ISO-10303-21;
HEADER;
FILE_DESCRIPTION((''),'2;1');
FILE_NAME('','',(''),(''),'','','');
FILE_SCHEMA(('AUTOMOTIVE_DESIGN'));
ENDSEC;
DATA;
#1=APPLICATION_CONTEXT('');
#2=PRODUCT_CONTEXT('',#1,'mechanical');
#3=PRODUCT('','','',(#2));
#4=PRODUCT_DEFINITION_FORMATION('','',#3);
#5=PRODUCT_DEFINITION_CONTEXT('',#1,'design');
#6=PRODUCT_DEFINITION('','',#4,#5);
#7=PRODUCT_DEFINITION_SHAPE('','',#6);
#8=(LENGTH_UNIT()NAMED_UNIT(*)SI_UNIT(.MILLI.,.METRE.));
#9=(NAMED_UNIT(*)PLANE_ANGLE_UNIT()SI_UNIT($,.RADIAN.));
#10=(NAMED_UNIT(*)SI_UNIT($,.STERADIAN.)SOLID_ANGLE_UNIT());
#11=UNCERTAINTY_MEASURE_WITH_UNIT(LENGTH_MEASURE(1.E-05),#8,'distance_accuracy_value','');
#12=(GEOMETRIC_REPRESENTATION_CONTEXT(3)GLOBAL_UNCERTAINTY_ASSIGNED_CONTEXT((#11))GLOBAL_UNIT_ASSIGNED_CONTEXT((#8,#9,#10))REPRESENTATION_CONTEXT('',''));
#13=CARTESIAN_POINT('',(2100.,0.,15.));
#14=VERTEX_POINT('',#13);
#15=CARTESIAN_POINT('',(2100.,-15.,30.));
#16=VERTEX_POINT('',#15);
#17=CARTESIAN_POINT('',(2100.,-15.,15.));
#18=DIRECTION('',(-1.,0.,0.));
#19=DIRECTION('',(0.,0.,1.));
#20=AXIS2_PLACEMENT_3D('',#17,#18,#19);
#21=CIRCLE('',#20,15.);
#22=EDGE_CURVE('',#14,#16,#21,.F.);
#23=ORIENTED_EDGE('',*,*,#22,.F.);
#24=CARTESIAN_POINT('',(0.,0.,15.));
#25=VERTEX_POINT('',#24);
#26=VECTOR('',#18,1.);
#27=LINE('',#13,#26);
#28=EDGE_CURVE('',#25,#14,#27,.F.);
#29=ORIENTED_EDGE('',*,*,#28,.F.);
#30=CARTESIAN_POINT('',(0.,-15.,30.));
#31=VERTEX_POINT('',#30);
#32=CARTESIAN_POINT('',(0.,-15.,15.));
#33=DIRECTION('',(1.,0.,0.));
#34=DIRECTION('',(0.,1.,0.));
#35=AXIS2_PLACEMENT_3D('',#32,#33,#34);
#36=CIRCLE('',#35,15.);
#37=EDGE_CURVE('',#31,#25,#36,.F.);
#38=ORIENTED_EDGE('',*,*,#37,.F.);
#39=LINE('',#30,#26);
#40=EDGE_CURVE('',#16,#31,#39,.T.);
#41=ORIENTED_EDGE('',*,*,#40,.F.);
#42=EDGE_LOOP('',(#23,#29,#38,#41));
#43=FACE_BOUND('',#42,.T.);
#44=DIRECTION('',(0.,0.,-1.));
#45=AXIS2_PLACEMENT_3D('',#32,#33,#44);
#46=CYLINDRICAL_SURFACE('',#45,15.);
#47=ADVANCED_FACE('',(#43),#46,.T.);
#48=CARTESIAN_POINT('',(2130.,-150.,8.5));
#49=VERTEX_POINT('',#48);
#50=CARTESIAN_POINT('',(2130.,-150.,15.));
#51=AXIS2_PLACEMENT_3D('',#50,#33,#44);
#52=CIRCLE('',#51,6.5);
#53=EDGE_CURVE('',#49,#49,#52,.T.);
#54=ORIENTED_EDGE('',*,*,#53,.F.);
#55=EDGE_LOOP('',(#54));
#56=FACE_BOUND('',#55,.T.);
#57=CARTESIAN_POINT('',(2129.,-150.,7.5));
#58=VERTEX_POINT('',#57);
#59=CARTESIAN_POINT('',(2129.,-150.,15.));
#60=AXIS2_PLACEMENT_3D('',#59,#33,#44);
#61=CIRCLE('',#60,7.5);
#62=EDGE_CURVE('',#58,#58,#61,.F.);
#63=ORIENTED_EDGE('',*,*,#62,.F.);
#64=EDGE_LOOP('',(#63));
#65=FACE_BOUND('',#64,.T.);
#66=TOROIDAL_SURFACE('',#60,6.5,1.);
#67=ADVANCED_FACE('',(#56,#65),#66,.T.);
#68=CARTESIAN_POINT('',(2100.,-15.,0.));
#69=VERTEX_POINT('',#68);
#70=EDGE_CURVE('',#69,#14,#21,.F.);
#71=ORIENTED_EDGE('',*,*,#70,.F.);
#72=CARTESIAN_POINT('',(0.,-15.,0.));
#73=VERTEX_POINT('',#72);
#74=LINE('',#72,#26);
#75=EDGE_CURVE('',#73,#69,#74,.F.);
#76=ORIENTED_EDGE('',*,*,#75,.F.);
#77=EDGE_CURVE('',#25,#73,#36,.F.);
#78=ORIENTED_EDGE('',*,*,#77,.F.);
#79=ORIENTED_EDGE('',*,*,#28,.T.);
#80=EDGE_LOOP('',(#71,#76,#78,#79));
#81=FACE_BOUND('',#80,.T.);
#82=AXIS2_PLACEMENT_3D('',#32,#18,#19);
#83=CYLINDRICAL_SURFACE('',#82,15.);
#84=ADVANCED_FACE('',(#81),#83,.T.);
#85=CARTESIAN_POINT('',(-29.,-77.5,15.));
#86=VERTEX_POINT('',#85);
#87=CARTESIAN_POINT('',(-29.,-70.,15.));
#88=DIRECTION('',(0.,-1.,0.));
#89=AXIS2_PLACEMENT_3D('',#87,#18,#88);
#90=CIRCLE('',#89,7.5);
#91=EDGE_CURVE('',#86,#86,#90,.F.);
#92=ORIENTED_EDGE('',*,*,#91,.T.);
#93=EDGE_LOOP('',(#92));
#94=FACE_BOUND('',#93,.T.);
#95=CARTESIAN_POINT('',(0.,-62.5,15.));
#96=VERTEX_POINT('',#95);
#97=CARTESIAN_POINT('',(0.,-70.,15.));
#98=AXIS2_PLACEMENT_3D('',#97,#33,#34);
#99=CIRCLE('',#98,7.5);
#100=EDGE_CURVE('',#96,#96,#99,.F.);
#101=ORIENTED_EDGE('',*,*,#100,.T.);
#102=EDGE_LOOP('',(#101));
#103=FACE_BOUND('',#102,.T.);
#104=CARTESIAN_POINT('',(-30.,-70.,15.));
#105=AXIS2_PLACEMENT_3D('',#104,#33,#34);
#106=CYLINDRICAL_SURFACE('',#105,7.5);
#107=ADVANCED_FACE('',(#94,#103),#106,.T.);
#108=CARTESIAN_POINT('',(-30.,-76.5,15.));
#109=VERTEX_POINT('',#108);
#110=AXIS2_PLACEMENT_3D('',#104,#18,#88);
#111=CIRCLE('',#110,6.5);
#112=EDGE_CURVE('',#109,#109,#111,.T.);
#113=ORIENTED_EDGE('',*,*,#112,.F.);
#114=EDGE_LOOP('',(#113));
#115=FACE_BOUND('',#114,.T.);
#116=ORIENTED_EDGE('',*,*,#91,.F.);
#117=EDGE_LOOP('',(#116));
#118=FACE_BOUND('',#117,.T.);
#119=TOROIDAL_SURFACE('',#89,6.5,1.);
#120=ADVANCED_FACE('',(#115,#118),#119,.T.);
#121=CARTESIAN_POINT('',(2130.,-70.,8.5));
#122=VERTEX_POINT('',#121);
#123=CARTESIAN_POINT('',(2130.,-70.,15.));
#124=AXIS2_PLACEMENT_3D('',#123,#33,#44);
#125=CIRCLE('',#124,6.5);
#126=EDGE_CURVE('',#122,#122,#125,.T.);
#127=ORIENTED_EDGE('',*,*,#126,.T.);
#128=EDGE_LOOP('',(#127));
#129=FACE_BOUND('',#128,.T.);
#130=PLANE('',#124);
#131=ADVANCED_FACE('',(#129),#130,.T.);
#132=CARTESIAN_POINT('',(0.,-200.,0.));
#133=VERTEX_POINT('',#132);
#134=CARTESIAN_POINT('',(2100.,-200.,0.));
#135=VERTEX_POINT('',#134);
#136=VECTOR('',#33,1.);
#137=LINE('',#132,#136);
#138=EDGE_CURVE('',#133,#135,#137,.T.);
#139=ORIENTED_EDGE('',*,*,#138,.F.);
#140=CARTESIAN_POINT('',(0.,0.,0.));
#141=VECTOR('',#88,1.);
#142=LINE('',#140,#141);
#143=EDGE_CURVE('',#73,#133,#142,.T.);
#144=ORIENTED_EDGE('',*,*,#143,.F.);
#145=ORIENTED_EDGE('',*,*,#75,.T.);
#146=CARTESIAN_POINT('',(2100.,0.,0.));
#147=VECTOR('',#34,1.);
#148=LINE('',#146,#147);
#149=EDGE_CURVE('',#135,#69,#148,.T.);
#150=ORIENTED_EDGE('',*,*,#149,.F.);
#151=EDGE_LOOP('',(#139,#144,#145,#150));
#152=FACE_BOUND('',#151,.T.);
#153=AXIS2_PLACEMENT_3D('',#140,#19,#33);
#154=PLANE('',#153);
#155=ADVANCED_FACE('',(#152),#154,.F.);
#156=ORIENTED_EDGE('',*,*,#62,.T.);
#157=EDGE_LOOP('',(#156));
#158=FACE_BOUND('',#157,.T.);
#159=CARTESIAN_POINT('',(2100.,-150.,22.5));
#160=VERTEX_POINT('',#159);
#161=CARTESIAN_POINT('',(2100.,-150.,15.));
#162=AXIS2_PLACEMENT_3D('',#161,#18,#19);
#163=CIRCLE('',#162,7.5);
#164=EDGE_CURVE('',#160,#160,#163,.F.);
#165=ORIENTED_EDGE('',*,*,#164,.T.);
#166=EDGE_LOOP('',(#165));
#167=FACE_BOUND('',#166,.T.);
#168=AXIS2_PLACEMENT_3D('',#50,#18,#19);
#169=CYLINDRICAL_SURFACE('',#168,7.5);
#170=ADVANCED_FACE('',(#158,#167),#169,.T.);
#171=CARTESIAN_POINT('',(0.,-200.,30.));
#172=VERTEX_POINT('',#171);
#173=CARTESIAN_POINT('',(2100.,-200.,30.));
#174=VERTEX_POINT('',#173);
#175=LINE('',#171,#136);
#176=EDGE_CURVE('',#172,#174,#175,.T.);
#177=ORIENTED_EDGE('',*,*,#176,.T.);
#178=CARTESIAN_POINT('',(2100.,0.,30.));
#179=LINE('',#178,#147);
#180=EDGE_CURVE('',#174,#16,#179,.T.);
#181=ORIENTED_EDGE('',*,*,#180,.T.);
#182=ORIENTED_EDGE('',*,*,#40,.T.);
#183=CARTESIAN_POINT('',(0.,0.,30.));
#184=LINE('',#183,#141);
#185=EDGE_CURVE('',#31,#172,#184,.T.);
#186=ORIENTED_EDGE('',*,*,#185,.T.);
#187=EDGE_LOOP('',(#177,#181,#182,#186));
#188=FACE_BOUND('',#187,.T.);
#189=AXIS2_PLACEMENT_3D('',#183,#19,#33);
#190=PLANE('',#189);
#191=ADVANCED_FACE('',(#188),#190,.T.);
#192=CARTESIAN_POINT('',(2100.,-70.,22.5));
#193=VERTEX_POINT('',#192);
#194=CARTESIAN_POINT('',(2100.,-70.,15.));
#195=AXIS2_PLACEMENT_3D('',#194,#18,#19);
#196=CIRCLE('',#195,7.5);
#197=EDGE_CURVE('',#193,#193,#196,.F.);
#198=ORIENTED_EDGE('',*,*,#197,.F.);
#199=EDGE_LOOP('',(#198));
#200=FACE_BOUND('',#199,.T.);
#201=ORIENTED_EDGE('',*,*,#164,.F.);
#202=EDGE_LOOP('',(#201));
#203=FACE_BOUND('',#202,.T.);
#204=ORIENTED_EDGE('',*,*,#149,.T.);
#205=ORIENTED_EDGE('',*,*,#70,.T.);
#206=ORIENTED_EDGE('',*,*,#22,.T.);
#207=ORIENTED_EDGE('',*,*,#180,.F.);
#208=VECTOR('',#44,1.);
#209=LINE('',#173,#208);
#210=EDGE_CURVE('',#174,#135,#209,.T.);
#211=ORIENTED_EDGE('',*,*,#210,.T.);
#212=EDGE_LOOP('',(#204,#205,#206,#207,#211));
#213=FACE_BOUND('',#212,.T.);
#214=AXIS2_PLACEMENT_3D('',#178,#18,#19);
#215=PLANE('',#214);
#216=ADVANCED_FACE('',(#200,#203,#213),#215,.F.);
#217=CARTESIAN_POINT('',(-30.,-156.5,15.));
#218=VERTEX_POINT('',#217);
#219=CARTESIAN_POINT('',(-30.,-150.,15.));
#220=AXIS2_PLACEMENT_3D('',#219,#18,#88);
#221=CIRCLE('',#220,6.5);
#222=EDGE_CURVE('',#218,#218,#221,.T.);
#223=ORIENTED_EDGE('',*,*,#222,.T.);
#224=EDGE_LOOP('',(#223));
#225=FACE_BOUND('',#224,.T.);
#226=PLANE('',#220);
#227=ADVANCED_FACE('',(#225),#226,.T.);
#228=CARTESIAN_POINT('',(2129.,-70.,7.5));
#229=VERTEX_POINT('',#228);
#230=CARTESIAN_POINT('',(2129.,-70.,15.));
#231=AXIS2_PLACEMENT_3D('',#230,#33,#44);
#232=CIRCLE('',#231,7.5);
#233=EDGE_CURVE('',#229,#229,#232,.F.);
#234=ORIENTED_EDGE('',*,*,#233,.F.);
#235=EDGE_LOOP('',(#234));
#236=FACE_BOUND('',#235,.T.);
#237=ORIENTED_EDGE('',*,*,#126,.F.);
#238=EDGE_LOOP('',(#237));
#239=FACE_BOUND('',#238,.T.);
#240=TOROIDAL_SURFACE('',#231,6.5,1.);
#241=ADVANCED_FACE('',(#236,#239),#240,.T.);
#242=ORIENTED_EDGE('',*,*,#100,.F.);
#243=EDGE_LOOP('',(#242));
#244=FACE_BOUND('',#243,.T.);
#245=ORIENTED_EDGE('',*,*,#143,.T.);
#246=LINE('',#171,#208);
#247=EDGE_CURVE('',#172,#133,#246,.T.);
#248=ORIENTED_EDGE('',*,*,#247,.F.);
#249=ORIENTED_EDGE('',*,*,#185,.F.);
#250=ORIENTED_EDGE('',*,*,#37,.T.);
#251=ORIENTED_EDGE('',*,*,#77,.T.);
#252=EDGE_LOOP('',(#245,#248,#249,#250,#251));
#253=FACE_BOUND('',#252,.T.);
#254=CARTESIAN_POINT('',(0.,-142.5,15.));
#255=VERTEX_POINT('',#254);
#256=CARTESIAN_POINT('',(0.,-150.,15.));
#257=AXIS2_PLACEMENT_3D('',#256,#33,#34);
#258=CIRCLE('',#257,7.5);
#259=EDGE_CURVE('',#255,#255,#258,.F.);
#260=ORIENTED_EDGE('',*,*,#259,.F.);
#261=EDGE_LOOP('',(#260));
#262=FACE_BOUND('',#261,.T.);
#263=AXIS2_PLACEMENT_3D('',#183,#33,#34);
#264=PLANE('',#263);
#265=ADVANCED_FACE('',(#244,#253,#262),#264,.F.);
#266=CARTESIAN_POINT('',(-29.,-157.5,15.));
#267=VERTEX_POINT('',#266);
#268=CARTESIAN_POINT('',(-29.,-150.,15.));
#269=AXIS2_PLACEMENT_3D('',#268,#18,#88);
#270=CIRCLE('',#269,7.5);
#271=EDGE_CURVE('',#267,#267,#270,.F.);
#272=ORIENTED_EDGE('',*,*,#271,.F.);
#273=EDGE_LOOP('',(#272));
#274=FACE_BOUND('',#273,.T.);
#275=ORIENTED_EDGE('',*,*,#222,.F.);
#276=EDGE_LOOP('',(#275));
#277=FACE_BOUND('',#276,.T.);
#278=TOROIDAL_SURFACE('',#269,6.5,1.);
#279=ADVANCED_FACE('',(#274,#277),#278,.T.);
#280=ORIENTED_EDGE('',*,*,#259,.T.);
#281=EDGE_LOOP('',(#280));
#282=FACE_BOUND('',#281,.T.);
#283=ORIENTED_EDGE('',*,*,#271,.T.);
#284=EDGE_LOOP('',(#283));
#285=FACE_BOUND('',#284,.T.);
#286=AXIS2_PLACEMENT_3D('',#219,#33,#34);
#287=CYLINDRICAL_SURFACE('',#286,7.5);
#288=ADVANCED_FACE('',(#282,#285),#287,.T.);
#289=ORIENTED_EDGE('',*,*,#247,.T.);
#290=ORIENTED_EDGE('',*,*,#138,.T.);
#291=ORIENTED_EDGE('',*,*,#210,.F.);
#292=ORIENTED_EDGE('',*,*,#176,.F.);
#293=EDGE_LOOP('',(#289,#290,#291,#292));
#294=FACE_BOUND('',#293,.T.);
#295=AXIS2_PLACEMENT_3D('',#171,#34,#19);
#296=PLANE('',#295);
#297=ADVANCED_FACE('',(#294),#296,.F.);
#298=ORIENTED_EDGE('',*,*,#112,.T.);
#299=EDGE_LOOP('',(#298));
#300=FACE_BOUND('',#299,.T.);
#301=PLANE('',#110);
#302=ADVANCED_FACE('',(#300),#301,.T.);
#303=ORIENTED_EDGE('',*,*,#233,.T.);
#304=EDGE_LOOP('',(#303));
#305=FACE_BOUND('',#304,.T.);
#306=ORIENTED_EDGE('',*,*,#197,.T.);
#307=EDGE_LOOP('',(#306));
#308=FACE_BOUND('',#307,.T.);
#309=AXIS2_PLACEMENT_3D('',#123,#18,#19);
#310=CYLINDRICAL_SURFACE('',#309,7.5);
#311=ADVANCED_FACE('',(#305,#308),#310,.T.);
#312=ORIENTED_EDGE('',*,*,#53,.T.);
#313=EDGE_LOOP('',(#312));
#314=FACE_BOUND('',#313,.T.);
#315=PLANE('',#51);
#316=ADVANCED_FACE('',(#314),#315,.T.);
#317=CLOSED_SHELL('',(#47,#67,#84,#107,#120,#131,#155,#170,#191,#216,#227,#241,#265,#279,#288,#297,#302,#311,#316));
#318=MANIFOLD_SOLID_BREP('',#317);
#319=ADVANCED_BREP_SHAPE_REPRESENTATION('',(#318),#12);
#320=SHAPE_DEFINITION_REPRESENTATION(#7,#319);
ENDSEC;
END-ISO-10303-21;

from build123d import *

# Parameters (mm, degrees)
SCHIZZO1_W                   = 2100
SCHIZZO1_H                   = 200
ESTRUSIONE_ESTRUSIONE1_DEPTH = 30
RACCORDO1_R                  = 15
SCHIZZO3_R                   = 7.5
ESTRUSIONE_ESTRUSIONE2_DEPTH = 30
RACCORDO2_R                  = 1
ESTRUSIONE_ESTRUSIONE3_START = 30
SCHIZZO4_R                   = 7.5
ESTRUSIONE_ESTRUSIONE3_DEPTH = 30
RACCORDO3_R                  = 1


with BuildPart() as part:
    # Schizzo1 → Estrusione-Estrusione1 (new body)
    with BuildSketch(Plane.XY):
        with Locations((1050, -100)):
            Rectangle(SCHIZZO1_W, SCHIZZO1_H)
    extrude(amount=ESTRUSIONE_ESTRUSIONE1_DEPTH)

    # Raccordo1
    raccordo1_edges = [part.edges().sort_by_distance(p)[0] for p in [
        (1050, 0, 0),
        (1050, 0, 30),
    ]]
    fillet(raccordo1_edges, radius=RACCORDO1_R - 0.0001)  # a hair under: the kernel refuses the full size

    # Schizzo3 → Estrusione-Estrusione2 (add)
    with BuildSketch(Plane(origin=(2100, 0, 0), x_dir=(0, 0, -1), z_dir=(1, 0, 0))):
        with Locations(Location((-15, -70, 0), (0, 0, 180))):
            Circle(SCHIZZO3_R)
        with Locations(Location((-15, -150, 0), (0, 0, 180))):
            Circle(SCHIZZO3_R)
    extrude(amount=ESTRUSIONE_ESTRUSIONE2_DEPTH)

    # Raccordo2
    raccordo2_edges = [part.edges().sort_by_distance(p)[0] for p in [
        (2130, -70, 7.5),
        (2130, -150, 7.5),
    ]]
    fillet(raccordo2_edges, radius=RACCORDO2_R)

    # Schizzo4 → Estrusione-Estrusione3 (add)
    with BuildSketch(Plane.ZY.offset(ESTRUSIONE_ESTRUSIONE3_START)):
        with Locations((15, -70)):
            Circle(SCHIZZO4_R)
        with Locations((15, -150)):
            Circle(SCHIZZO4_R)
    extrude(amount=-ESTRUSIONE_ESTRUSIONE3_DEPTH)

    # Raccordo3
    raccordo3_edges = [part.edges().sort_by_distance(p)[0] for p in [
        (-30, -70, 7.5),
        (-30, -150, 7.5),
    ]]
    fillet(raccordo3_edges, radius=RACCORDO3_R)


solid = part.part
